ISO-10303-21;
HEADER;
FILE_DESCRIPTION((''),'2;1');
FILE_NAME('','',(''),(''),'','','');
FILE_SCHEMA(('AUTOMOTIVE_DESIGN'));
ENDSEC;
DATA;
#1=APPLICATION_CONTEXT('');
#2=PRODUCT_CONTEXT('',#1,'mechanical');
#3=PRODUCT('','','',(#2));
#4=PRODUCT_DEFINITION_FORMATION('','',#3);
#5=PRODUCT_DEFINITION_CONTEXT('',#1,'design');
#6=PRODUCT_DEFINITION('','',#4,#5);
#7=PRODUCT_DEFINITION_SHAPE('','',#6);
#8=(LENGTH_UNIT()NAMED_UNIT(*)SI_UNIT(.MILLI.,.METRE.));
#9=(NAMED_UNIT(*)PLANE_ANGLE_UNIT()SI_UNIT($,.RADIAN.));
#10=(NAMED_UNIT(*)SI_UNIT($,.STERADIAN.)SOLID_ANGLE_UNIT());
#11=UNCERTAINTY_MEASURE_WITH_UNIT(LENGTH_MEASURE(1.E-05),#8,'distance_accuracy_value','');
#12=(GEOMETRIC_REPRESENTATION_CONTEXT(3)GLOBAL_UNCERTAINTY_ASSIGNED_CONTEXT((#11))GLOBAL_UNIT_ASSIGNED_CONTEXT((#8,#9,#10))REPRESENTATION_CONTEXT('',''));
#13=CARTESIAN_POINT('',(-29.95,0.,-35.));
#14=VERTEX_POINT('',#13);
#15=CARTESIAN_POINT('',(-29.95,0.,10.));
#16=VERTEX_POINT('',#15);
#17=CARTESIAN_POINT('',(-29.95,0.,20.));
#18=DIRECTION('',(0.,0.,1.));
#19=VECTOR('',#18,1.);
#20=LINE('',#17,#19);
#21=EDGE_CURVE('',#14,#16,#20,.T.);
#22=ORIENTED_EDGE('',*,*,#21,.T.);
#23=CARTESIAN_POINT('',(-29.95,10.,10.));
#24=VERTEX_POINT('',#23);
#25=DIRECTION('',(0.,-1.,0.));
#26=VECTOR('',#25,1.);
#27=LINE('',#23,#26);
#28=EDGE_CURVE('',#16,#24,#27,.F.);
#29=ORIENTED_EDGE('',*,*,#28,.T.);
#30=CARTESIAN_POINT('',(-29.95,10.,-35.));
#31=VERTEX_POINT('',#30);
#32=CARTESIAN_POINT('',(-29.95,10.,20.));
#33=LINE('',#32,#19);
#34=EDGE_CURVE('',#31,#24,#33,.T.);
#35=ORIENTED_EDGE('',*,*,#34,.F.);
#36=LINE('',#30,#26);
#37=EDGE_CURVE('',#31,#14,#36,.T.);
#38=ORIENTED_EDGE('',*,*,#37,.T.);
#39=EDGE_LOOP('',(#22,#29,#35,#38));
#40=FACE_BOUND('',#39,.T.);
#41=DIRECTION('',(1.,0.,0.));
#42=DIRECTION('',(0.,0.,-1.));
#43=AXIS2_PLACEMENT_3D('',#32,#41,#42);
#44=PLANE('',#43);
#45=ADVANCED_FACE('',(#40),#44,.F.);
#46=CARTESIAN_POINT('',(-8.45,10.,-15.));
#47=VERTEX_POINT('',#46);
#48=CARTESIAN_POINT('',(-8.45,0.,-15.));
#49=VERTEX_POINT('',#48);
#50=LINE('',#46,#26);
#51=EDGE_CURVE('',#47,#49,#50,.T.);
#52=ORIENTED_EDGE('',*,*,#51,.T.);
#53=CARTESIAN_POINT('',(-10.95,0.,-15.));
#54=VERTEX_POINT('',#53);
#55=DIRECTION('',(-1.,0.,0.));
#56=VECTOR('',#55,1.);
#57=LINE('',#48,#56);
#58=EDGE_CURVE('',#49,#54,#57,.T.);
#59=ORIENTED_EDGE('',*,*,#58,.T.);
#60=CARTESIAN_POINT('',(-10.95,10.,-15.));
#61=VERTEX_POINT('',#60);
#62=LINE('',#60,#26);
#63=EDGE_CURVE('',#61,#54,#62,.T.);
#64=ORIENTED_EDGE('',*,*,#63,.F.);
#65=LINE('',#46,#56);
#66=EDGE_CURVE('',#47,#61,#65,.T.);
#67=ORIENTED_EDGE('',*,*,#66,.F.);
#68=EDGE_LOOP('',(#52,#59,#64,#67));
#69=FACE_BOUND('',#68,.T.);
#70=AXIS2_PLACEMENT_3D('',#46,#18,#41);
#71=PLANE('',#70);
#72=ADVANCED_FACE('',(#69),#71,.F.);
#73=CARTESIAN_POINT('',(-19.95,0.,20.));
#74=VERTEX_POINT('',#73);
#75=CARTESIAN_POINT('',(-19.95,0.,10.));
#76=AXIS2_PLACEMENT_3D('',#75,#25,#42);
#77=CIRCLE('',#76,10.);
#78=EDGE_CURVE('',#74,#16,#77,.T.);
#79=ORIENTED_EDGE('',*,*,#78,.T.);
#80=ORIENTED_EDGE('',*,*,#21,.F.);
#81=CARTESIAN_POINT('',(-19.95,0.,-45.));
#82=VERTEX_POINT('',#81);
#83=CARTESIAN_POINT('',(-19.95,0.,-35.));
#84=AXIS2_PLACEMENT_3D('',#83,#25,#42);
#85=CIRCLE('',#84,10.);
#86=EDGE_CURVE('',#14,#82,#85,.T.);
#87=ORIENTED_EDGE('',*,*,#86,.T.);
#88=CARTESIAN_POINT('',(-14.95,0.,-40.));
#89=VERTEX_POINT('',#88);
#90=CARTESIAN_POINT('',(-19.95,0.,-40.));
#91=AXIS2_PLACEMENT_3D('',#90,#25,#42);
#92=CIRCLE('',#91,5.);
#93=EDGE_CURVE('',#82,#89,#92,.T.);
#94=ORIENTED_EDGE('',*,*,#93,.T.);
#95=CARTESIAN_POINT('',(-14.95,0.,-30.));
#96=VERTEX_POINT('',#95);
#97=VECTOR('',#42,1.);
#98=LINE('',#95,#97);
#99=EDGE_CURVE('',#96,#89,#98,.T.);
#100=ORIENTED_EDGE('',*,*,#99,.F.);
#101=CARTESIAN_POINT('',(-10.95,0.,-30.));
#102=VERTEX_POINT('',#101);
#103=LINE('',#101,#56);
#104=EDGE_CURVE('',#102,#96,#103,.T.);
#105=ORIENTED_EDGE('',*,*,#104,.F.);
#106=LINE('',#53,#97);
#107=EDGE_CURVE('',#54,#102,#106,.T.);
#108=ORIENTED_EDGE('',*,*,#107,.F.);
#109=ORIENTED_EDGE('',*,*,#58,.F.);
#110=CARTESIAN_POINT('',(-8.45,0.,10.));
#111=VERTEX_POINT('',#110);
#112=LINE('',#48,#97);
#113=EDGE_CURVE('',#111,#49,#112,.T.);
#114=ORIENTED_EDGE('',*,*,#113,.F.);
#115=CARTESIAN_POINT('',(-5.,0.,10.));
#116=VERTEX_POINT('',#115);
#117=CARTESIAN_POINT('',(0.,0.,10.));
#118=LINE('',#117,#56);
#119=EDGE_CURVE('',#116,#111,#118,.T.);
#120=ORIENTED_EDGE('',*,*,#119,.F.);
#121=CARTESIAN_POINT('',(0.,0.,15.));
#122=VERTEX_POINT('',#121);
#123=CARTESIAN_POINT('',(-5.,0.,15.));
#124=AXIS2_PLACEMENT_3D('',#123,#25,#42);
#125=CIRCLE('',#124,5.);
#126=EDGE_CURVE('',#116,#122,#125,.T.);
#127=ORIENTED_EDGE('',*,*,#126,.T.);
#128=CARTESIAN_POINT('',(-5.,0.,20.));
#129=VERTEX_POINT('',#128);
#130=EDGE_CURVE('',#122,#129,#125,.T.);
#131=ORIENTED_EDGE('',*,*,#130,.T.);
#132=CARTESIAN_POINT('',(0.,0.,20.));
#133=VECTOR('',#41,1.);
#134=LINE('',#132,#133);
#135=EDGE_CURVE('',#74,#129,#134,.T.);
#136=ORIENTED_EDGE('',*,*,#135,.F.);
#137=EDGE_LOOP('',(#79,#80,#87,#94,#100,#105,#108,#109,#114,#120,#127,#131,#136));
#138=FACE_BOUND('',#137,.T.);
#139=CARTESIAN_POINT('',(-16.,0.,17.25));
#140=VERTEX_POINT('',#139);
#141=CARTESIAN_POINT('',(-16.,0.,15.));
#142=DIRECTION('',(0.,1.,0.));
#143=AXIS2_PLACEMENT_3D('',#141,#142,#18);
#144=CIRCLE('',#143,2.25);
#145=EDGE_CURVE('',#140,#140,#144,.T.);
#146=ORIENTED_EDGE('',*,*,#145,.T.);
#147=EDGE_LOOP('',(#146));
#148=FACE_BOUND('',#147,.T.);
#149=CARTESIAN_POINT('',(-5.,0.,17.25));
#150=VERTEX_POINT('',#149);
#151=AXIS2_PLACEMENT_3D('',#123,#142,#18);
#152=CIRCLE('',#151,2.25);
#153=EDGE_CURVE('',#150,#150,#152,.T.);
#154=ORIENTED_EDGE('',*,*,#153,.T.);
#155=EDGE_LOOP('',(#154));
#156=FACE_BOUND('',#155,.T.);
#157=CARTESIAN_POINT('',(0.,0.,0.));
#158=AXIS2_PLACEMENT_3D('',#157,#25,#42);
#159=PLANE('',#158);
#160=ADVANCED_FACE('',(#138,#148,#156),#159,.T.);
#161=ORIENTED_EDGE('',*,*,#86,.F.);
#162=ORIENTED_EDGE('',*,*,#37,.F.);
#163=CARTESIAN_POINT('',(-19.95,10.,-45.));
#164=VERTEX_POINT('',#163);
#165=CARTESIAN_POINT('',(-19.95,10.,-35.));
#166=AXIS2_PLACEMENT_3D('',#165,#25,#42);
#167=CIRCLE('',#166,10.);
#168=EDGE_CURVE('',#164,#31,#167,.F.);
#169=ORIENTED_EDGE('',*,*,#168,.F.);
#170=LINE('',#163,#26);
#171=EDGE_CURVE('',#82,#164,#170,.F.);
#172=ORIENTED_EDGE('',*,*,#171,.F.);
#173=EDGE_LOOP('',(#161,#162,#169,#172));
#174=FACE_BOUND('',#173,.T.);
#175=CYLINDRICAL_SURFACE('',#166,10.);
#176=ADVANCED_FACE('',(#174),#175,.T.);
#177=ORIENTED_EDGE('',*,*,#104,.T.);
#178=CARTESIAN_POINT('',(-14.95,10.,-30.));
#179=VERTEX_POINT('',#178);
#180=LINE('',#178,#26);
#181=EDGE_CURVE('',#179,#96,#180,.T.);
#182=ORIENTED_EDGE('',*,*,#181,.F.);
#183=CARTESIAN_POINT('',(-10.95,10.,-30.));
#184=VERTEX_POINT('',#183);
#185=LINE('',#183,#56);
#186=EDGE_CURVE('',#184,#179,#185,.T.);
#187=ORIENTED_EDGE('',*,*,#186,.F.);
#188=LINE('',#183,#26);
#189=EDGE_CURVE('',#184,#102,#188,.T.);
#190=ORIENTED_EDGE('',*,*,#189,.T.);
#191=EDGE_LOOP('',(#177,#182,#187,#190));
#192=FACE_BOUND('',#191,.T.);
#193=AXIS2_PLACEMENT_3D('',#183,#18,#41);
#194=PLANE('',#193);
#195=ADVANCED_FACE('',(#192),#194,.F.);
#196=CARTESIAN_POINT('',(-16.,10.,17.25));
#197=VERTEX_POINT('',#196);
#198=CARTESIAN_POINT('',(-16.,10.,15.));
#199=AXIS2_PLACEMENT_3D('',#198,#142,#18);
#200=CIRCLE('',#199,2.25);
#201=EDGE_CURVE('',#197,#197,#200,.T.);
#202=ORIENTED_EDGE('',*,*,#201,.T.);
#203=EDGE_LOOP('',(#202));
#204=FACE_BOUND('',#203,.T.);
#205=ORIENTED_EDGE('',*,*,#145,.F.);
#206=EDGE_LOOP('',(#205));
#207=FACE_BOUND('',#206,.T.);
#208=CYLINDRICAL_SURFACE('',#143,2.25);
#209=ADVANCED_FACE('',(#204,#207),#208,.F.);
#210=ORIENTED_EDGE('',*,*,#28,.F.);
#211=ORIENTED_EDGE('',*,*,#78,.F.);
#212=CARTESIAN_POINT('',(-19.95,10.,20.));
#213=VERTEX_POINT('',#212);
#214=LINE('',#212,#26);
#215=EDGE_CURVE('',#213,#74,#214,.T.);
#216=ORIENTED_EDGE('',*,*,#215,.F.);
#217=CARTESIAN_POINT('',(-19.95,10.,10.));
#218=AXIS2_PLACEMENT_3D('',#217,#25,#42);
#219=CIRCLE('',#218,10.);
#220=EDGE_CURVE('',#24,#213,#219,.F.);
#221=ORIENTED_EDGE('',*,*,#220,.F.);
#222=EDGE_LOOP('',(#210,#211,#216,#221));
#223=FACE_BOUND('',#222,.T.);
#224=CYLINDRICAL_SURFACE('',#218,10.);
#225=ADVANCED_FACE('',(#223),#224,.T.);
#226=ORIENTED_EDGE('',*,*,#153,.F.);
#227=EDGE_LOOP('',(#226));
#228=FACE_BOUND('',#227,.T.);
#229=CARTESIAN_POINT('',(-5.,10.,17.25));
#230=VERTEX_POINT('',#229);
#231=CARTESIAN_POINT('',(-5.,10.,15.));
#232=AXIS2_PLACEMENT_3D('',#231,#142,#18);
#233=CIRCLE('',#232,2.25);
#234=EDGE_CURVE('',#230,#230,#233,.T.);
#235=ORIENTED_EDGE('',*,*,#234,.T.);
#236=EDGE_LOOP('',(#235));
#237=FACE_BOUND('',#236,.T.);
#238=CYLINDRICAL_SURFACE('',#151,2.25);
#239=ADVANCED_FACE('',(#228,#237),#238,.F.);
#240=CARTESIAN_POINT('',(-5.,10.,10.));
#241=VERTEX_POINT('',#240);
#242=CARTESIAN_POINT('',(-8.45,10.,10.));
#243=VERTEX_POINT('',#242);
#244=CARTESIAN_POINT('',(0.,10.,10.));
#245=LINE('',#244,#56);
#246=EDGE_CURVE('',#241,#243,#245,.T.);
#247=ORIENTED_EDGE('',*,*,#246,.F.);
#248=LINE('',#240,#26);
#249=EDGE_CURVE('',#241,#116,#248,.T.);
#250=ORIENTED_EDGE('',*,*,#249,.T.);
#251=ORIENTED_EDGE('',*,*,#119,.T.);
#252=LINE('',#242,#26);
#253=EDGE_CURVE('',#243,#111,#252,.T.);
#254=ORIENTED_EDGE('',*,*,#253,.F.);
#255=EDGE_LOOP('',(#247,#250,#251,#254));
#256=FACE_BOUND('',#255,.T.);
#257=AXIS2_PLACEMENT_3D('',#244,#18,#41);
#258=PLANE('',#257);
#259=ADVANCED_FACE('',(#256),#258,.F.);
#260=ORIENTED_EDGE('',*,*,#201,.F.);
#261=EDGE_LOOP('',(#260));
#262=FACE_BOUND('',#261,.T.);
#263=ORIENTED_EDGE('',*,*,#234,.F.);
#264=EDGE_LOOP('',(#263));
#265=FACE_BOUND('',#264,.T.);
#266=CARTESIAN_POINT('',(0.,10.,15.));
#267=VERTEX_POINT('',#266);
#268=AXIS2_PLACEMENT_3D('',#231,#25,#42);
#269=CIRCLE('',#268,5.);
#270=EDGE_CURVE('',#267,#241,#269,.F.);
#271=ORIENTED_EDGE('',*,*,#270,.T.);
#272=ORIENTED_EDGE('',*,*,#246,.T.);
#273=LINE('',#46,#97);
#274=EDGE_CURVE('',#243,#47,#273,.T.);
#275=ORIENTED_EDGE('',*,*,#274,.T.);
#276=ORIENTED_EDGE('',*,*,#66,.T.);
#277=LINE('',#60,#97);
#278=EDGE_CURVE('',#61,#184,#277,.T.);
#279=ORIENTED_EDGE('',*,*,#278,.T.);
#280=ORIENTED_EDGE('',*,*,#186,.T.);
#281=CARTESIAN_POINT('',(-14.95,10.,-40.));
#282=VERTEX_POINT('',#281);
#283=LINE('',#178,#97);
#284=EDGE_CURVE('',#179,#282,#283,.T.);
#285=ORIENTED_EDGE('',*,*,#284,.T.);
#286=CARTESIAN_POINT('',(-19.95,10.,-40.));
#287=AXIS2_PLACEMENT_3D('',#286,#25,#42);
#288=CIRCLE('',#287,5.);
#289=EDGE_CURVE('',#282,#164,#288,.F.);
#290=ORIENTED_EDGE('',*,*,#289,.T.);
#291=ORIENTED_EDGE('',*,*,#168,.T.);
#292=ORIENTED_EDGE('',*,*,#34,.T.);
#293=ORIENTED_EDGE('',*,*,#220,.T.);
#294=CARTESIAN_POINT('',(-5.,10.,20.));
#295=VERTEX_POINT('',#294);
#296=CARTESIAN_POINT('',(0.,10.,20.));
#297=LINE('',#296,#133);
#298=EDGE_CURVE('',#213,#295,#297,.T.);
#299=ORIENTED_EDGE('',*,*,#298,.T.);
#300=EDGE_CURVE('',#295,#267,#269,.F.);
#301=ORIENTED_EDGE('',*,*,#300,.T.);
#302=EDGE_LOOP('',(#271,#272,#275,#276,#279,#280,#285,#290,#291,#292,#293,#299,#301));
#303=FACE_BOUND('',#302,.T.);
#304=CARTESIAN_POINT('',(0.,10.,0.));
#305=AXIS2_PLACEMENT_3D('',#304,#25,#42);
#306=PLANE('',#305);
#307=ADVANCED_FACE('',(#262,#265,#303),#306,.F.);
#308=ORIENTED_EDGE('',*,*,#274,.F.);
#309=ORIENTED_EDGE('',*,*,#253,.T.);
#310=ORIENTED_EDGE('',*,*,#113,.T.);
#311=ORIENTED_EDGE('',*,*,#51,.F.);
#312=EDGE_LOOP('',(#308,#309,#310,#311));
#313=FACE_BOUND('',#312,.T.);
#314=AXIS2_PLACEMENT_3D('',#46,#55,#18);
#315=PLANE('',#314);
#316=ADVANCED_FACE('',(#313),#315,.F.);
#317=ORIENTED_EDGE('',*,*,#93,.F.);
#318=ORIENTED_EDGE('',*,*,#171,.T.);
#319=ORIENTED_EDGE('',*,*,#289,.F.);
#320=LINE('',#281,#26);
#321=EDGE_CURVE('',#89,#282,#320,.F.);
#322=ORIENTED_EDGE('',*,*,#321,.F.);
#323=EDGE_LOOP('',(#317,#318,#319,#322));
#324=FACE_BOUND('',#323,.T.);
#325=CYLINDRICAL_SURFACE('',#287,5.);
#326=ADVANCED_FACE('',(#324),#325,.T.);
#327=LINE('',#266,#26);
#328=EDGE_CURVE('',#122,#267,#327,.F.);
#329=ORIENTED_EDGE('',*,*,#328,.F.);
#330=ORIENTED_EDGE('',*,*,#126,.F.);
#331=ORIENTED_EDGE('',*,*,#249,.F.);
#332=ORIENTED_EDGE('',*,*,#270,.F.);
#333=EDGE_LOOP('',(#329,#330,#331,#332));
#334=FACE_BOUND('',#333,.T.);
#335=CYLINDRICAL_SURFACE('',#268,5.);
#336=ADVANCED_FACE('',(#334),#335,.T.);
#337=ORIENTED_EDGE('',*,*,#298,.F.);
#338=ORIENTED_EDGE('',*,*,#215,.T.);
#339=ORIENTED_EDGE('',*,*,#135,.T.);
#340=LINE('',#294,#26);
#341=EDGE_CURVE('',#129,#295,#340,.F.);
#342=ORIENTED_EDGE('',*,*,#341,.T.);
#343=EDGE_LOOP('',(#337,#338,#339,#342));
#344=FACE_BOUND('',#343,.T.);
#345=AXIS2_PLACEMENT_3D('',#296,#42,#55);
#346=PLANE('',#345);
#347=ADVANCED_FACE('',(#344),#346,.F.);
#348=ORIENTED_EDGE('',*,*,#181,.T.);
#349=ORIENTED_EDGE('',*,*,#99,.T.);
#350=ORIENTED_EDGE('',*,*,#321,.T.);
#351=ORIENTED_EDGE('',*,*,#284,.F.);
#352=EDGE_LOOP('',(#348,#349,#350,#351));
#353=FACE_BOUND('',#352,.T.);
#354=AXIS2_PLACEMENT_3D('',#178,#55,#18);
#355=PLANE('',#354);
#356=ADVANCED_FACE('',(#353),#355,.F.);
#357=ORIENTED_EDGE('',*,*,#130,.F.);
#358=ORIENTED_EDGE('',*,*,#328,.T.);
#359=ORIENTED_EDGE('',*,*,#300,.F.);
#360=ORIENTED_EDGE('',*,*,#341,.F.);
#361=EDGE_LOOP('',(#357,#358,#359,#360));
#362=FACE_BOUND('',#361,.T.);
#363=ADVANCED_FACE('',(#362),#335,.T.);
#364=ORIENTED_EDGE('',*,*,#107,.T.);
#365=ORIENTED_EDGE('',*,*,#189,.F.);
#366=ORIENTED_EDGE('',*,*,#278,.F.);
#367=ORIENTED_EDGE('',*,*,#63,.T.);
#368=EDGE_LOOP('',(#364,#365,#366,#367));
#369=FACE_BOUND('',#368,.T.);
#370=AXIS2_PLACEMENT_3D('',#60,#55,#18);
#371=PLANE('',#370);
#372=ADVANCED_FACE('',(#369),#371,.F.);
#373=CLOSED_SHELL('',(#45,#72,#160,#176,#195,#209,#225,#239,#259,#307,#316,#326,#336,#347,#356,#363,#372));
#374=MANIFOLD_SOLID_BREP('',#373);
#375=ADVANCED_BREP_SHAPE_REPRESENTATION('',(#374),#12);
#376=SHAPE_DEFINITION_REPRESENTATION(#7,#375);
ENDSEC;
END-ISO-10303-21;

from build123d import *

# Parameters (mm, degrees)
BOSS_EXTRUDE1_DEPTH = 10
SKETCH3_R           = 2.25
CUT_EXTRUDE1_DEPTH  = 10
FILLET1_R           = 10
FILLET2_R           = 5


with BuildPart() as part:
    # Sketch2 → Boss-Extrude1 (new body)
    with BuildSketch(Plane(origin=(0, 0, 0), x_dir=(1, 0, 0), z_dir=(0, 1, 0))):
        Polygon((-8.45, 15), (-10.95, 15), (-10.95, 30), (-14.95, 30), (-14.95, 45), (-29.95, 45), (-29.95, -20), (0, -20), (0, -10), (-8.45, -10), align=None)
    extrude(amount=BOSS_EXTRUDE1_DEPTH)

    # Sketch3 → Cut-Extrude1 (cut)
    with BuildSketch(Plane(origin=(0, 10, 0), x_dir=(1, 0, 0), z_dir=(0, 1, 0))):
        with Locations(Location((-5, -15, 0), (0, 0, 270))):
            Circle(SKETCH3_R)
        with Locations(Location((-16, -15, 0), (0, 0, 270))):
            Circle(SKETCH3_R)
    extrude(amount=-CUT_EXTRUDE1_DEPTH, mode=Mode.SUBTRACT)

    # Fillet1
    fillet1_edges = [part.edges().sort_by_distance(p)[0] for p in [
        (-29.95, 5, 20),
        (-29.95, 5, -45),
    ]]
    fillet(fillet1_edges, radius=FILLET1_R)

    # Fillet2
    fillet2_edges = [part.edges().sort_by_distance(p)[0] for p in [
        (-14.95, 5, -45),
        (0, 5, 10),
        (0, 5, 20),
    ]]
    fillet(fillet2_edges, radius=FILLET2_R - 0.0001)  # a hair under: the kernel refuses the full size


solid = part.part
